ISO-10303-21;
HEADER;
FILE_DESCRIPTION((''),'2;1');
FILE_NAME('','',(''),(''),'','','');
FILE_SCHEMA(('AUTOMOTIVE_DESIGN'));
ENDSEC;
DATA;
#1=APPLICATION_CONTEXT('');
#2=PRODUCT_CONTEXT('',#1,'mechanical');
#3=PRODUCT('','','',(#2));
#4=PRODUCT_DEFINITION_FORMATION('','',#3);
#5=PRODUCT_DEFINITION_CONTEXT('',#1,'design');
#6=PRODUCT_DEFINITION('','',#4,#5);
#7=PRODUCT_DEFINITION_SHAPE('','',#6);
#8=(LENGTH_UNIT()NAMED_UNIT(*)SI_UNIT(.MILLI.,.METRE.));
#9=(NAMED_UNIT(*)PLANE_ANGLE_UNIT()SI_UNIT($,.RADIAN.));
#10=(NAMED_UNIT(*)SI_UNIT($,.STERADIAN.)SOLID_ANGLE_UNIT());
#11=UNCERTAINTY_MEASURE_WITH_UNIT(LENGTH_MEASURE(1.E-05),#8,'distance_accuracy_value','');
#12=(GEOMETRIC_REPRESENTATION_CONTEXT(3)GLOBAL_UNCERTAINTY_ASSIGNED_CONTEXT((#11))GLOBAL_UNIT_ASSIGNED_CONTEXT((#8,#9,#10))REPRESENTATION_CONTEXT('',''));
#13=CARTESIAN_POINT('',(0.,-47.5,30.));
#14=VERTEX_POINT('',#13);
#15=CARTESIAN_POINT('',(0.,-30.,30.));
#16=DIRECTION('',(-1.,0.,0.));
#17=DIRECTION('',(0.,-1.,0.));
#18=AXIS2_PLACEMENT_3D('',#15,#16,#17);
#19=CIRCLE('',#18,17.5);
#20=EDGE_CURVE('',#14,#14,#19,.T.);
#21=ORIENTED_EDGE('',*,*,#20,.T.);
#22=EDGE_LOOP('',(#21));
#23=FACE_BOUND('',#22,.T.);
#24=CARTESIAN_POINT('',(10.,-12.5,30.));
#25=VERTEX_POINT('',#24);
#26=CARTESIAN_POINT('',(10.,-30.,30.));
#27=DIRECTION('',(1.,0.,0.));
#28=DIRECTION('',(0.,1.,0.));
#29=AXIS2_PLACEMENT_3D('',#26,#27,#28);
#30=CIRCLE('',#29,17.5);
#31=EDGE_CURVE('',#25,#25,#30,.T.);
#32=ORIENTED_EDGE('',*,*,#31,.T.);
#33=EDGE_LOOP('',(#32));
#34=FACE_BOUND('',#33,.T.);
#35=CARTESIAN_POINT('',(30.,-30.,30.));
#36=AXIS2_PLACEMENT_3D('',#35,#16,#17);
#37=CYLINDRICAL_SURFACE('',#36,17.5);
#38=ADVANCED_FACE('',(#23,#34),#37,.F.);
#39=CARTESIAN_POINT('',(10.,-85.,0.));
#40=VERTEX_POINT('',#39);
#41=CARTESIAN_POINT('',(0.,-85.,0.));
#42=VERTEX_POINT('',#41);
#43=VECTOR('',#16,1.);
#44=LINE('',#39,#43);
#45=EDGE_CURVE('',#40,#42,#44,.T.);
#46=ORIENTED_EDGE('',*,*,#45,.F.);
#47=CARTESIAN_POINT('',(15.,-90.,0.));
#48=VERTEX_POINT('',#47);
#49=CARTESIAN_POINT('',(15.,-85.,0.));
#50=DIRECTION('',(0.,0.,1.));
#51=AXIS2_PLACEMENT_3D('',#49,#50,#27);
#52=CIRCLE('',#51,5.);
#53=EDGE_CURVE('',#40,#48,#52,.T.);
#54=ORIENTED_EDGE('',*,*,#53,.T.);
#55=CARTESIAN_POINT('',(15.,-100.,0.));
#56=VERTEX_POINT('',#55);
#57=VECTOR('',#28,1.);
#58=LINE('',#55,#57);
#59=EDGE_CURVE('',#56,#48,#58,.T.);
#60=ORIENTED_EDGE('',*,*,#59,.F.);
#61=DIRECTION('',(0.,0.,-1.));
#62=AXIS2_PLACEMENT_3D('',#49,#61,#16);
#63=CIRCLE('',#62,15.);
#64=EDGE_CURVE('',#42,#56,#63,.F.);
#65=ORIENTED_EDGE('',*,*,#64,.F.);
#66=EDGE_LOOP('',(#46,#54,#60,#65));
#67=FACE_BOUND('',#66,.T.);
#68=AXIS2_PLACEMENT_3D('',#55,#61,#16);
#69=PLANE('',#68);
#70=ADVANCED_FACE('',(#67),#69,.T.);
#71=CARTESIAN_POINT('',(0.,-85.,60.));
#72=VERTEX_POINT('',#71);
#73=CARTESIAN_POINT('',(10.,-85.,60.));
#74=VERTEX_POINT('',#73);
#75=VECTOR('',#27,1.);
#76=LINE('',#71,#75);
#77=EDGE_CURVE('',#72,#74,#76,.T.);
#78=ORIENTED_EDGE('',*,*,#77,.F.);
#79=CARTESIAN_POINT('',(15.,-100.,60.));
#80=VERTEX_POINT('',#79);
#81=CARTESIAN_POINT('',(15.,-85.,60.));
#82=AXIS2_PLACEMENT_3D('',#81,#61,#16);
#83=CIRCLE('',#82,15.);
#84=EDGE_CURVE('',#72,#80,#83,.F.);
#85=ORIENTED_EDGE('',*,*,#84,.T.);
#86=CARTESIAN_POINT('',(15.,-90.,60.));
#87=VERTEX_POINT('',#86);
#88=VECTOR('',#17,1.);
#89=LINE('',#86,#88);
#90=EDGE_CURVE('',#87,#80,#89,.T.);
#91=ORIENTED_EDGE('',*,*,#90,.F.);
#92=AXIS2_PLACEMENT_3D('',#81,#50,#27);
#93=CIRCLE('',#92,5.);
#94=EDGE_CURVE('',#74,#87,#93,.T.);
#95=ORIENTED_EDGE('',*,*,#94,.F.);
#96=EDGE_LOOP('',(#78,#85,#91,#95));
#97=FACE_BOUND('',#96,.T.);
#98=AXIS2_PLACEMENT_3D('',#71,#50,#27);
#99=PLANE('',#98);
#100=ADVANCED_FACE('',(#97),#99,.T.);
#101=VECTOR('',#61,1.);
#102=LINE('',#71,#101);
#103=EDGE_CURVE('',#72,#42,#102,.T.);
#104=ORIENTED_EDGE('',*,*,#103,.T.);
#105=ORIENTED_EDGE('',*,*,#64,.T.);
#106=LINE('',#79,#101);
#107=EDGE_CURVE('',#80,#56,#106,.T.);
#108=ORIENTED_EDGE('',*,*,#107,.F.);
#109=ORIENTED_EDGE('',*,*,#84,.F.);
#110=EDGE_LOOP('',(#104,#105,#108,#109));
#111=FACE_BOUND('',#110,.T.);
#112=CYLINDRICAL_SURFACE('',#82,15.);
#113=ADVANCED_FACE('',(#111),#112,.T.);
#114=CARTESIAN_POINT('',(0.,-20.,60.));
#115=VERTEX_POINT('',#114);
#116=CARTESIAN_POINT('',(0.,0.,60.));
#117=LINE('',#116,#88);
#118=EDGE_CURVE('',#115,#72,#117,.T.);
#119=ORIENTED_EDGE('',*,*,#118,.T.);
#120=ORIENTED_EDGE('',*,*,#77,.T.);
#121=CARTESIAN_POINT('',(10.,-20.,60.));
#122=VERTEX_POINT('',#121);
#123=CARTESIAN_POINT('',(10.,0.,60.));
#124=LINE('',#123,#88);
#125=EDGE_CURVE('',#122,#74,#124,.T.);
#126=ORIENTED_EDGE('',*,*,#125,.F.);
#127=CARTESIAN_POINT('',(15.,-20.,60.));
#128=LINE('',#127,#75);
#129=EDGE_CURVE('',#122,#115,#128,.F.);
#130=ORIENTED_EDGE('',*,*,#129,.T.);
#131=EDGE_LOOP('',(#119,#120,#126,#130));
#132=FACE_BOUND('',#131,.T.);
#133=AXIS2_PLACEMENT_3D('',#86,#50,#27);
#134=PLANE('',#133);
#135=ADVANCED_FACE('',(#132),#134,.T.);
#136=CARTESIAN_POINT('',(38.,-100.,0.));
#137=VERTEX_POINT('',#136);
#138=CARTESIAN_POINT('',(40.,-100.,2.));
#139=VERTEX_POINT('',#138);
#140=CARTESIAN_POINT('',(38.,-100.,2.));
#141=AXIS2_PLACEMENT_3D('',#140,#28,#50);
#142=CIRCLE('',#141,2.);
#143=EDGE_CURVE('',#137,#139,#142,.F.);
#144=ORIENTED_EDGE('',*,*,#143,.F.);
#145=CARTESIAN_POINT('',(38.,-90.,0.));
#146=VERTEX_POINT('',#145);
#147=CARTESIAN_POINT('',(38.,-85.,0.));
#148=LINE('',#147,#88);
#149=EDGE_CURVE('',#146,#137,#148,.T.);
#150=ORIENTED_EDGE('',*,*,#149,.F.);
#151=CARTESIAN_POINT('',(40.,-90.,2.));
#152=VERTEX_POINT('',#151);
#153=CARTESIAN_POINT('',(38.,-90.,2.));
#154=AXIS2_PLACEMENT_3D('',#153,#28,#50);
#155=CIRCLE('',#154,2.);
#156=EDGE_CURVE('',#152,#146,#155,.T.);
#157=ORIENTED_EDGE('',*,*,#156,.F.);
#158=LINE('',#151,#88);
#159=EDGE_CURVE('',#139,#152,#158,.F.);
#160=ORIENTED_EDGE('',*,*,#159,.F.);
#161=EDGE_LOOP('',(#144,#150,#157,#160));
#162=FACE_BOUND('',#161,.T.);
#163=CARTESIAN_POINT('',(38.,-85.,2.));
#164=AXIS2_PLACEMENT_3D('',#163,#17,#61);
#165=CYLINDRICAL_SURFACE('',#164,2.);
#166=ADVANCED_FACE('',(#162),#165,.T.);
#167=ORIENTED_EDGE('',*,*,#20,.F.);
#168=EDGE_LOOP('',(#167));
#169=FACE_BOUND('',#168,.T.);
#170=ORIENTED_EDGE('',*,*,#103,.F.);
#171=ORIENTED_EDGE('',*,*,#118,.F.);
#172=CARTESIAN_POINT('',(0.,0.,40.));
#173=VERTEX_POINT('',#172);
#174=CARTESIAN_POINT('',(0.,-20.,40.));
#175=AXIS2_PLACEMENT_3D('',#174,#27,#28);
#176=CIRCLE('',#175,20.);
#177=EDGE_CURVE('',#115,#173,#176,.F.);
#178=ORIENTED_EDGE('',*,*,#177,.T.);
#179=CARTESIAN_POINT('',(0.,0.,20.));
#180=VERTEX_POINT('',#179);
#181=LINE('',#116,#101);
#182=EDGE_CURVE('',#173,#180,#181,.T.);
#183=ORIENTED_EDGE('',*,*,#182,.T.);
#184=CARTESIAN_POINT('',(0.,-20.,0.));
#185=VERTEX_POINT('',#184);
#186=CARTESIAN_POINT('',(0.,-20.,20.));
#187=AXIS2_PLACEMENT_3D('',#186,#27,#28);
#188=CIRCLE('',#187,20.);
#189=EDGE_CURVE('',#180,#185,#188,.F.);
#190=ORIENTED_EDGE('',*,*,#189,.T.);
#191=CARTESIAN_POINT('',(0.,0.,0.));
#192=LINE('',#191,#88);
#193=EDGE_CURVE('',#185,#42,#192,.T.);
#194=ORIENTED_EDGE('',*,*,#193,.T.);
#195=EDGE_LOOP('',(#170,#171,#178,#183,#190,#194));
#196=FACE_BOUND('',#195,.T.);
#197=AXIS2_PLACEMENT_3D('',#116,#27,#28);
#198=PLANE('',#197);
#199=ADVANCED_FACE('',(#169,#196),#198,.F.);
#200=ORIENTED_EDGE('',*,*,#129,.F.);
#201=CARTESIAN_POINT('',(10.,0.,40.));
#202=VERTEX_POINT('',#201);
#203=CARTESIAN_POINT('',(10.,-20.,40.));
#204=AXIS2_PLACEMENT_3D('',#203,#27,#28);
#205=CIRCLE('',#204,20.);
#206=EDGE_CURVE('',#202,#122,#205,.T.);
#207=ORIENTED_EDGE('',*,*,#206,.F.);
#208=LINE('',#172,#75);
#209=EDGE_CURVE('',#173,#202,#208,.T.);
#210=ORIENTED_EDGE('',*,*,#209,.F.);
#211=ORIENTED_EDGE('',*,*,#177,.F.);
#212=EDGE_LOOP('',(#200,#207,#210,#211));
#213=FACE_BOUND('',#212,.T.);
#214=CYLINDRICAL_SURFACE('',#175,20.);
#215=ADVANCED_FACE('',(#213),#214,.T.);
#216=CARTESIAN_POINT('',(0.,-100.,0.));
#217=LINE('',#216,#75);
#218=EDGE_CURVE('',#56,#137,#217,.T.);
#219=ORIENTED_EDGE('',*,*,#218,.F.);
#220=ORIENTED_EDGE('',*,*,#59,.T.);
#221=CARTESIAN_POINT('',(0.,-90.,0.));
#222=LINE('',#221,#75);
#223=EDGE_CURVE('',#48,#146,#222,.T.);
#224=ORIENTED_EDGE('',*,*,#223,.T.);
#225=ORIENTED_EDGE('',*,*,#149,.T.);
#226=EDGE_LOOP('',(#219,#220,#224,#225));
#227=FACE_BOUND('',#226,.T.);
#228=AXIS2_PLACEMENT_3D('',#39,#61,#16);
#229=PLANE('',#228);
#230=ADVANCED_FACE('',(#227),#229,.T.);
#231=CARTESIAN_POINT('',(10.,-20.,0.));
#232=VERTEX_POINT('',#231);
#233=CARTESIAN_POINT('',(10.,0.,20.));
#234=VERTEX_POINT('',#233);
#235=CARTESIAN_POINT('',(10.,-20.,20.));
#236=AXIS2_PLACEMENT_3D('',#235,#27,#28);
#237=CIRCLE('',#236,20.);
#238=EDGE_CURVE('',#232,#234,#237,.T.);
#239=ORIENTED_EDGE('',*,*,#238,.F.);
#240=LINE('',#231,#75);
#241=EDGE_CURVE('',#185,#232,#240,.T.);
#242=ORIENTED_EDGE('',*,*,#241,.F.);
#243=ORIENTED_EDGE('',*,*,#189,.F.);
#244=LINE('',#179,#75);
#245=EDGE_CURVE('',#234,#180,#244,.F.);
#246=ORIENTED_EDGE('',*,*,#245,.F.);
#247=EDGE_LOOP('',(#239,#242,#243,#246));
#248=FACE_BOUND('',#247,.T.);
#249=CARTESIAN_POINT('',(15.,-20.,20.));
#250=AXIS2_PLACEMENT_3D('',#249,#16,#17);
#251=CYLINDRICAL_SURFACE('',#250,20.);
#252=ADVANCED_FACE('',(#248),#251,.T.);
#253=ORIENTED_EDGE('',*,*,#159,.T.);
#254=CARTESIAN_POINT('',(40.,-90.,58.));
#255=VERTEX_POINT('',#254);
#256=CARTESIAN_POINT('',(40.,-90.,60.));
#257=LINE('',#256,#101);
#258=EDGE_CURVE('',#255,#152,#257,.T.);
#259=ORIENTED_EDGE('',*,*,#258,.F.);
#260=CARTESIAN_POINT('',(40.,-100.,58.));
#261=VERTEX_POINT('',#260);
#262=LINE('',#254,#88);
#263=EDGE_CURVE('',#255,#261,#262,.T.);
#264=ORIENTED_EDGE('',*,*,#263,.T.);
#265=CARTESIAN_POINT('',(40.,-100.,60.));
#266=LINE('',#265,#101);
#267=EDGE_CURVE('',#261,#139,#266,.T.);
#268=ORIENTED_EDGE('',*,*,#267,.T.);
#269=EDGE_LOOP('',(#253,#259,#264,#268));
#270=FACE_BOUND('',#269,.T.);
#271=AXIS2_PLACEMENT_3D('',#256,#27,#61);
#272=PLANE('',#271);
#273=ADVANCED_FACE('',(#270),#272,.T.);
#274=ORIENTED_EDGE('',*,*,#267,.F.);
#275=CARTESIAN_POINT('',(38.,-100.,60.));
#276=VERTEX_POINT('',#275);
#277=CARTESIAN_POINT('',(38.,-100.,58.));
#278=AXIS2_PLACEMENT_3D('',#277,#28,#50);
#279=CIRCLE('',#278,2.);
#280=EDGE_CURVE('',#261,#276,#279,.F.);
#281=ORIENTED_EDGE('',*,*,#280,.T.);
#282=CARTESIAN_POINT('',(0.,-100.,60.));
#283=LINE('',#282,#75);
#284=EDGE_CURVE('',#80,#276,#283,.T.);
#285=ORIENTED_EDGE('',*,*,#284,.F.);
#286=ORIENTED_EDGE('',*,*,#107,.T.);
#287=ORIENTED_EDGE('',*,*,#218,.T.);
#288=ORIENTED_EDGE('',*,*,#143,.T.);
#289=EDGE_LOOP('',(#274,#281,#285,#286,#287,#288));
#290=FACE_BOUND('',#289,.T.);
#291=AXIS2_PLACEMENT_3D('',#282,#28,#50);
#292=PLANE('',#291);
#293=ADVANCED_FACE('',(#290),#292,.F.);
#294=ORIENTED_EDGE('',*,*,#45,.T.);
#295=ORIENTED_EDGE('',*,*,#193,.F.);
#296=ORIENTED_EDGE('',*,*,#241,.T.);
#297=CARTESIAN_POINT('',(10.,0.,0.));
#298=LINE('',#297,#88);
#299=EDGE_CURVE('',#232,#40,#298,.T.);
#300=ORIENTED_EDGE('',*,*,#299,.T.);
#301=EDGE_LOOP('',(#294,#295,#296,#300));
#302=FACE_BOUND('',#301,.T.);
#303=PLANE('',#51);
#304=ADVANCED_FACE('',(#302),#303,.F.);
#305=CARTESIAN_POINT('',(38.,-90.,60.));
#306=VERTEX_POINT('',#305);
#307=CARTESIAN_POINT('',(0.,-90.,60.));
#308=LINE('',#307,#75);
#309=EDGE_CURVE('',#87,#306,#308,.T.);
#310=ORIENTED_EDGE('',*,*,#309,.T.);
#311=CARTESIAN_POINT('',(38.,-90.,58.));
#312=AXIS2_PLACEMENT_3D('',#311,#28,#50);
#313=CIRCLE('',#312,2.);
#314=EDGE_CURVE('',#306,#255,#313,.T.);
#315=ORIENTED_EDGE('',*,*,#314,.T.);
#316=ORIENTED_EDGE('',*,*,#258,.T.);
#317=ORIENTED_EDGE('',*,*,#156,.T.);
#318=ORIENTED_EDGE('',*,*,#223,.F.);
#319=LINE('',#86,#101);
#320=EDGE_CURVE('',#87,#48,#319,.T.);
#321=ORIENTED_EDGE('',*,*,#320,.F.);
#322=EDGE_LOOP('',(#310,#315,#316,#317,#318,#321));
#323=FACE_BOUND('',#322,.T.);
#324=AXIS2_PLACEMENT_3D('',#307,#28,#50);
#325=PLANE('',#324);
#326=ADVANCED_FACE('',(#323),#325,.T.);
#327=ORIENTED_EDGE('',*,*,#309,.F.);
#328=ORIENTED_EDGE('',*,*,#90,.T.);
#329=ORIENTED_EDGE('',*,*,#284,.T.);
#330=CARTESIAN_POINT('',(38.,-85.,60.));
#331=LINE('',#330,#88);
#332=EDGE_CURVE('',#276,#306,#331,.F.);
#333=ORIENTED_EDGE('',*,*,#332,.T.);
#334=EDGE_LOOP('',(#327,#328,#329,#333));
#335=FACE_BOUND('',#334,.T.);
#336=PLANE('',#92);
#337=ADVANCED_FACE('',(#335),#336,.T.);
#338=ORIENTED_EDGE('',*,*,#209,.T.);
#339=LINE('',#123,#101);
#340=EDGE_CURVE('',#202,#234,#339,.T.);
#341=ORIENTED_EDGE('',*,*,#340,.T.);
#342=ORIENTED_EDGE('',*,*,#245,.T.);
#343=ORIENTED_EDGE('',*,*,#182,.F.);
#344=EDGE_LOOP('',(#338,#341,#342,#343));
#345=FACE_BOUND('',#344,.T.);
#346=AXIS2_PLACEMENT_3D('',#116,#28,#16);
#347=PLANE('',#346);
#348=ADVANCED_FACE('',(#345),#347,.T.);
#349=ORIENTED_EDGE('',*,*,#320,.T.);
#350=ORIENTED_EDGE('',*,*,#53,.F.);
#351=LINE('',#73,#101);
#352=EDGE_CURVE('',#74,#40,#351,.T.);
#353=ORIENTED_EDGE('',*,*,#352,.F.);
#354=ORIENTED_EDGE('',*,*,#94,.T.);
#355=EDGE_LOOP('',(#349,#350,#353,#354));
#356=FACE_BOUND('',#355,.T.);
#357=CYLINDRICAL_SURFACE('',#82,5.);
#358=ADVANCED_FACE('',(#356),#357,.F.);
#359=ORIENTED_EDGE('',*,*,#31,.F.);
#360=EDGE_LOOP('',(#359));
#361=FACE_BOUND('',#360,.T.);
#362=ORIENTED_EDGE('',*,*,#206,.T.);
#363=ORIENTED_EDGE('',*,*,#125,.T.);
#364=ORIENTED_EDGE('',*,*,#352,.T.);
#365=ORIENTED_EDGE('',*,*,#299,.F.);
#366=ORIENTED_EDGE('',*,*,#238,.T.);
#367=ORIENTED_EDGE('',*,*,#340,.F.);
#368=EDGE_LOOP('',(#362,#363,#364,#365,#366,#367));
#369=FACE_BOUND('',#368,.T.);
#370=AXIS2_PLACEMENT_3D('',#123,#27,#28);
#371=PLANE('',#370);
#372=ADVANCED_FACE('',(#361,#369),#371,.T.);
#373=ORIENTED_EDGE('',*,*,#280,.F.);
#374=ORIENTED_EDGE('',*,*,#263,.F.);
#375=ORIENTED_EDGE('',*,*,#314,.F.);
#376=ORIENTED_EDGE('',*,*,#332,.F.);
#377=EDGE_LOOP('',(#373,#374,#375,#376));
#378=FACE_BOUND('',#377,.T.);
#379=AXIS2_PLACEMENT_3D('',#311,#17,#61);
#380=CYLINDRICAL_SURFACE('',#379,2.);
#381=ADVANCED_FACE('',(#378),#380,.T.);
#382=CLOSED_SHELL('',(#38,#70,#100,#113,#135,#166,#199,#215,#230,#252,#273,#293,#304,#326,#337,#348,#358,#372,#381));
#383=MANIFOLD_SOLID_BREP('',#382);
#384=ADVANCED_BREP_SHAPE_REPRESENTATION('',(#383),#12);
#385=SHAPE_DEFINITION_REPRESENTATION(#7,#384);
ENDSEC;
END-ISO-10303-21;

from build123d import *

# Parameters (mm, degrees)
TABAN_FLAN_2_DEPTH    = 60
RADYUS1_R             = 20
RADYUS2_R             = 2
IZIM10_R              = 17.5
KES_EKSTR_ZYON1_DEPTH = 30


# Sheet-metal steps are written as plain solids
with BuildPart() as part:
    # Çizim1 → Taban-Flanş2 (new body)
    with BuildSketch(Plane.XY):
        with BuildLine():
            Line((0, 0), (0, -85))
            ThreePointArc((0, -85), (4.393398282, -95.606601718), (15, -100))
            Line((15, -100), (40, -100))
            Line((40, -100), (40, -90))
            Line((40, -90), (15, -90))
            ThreePointArc((15, -90), (11.464466094, -88.535533906), (10, -85))
            Line((10, -85), (10, 0))
            Line((10, 0), (0, 0))
        make_face()
    extrude(amount=TABAN_FLAN_2_DEPTH)

    # Radyus1
    radyus1_edges = [part.edges().sort_by_distance(p)[0] for p in [
        (5, 0, 0),
        (5, 0, 60),
    ]]
    fillet(radyus1_edges, radius=RADYUS1_R)

    # Radyus2
    radyus2_edges = [part.edges().sort_by_distance(p)[0] for p in [
        (40, -95, 0),
        (40, -95, 60),
    ]]
    fillet(radyus2_edges, radius=RADYUS2_R)

    # Çizim10 → Kes-Ekstrüzyon1 (cut)
    with BuildSketch(Plane.ZY):
        with Locations(Location((30, -30, 0), (0, 0, 270))):
            Circle(IZIM10_R)
    extrude(amount=-KES_EKSTR_ZYON1_DEPTH, mode=Mode.SUBTRACT)


solid = part.part
